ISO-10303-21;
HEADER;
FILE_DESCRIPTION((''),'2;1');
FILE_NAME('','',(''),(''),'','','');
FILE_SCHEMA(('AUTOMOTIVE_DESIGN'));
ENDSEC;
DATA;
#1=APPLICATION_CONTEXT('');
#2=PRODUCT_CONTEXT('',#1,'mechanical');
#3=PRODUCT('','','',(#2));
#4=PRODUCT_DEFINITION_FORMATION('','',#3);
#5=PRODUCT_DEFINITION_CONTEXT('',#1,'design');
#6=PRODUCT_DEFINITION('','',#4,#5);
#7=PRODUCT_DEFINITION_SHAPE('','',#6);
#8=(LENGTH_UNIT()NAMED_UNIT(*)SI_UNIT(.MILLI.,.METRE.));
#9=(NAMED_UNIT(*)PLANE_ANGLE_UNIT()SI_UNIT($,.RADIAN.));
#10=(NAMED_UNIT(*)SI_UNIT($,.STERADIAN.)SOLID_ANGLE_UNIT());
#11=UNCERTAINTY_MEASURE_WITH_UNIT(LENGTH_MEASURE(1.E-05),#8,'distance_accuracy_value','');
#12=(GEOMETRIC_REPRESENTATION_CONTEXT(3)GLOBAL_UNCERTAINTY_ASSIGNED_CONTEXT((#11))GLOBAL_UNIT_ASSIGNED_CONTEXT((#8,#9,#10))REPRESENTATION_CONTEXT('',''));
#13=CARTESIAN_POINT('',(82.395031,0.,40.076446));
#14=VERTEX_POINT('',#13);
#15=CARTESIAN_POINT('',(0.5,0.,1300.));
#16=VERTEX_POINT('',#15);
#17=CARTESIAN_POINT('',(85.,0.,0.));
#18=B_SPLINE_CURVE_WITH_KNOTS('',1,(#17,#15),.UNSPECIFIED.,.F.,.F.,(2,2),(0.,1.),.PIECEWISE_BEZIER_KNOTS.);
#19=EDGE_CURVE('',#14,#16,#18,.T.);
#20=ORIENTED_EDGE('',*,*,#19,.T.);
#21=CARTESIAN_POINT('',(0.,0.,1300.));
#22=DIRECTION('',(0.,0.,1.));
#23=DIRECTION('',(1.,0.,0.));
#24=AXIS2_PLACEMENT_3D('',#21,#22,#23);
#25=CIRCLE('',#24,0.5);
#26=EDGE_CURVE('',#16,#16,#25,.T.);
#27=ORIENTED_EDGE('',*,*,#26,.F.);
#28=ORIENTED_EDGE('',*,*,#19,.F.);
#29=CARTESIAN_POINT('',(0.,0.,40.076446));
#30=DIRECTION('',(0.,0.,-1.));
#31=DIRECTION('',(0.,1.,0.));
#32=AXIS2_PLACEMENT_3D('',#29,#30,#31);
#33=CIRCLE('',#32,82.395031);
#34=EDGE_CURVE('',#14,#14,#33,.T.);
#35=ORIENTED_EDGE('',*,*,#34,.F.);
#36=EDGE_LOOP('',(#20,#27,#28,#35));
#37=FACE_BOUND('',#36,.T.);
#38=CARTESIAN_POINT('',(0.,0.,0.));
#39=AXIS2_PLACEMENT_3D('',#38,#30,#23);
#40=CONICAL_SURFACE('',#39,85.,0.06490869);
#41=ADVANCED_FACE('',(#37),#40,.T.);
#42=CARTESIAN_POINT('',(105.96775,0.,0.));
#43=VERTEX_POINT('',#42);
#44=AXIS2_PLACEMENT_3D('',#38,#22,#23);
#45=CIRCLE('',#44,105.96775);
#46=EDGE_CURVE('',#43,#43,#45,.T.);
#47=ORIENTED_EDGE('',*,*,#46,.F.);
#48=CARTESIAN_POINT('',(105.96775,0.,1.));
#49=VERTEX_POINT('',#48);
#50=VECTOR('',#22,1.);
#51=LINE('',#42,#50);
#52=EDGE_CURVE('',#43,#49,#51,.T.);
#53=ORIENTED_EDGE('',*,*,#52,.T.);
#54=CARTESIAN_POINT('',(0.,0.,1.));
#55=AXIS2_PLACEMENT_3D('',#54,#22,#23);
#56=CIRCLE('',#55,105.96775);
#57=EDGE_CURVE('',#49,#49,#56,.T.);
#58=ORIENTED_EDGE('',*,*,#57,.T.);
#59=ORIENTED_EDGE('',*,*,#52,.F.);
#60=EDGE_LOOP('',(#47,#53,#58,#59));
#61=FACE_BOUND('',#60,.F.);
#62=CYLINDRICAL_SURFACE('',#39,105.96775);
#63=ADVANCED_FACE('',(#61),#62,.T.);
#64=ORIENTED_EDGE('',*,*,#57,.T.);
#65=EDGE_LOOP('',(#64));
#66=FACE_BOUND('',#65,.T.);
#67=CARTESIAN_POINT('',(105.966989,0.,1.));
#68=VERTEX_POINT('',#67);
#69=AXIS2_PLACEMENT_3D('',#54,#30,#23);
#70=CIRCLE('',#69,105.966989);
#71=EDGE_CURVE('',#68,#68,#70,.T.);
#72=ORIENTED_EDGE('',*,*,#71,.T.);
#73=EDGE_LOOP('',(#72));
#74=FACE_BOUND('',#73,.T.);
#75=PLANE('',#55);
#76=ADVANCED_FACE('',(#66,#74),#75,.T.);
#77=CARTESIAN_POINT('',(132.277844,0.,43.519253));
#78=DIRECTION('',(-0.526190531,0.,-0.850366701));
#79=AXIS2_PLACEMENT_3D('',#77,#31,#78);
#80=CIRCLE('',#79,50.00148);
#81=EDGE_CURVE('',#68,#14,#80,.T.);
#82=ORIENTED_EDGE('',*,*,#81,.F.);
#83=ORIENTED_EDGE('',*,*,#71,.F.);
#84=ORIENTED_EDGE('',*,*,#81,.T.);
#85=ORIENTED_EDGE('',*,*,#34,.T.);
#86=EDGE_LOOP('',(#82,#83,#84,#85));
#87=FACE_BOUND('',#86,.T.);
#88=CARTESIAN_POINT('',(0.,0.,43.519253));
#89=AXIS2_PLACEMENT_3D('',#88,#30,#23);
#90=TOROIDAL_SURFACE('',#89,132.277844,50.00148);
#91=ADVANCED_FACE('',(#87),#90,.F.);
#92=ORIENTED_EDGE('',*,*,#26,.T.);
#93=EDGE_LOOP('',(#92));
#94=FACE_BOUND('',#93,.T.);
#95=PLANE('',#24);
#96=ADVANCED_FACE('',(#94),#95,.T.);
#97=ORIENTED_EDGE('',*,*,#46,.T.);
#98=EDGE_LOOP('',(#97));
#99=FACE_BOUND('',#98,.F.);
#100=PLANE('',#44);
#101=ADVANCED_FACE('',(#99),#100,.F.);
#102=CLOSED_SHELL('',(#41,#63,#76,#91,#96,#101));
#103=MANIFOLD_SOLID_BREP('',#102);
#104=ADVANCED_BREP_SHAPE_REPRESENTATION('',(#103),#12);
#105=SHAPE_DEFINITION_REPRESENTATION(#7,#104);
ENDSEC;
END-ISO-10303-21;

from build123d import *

# Parameters (mm, degrees)
F0_R     = 85
F2_R     = 0.5
F4_R     = 105.9677495378
F5_DEPTH = 1


# Not quite as in the source:
# - a fillet or chamfer that OpenCascade refuses, or shapes differently, is made with other operations: its cross-section is extruded or revolved along the edge and cut away or added


with BuildPart() as f3:
    # F0 (on Top) → F3 section 0
    with BuildSketch(Plane.XY):
        Circle(F0_R)
    # F2 (on offset) → F3 section 1
    with BuildSketch(Plane.XY.offset(1300)):
        Circle(F2_R)
    loft()

    # F4 (on Top) → F5 (join)
    with BuildSketch(Plane.XY):
        Circle(F4_R)
    extrude(amount=F5_DEPTH)

    # F6: fillet of radius 50 on 1 edges, made by hand


with BuildPart() as f6_tool2:
    # F6_s3 → F6_t4 (revolve)
    with BuildSketch(Plane.XZ):
        with BuildLine():
            ThreePointArc((105.9675390616, 0.9996598533), (89.4115983215, 17.7775955554), (82.3816590809, 40.2760011541))
            Line((82.3816590809, 40.2760011541), (77.3920405677, 39.9516759507))
            ThreePointArc((77.3920405677, 39.9516759507), (78.6689106061, 20.3136883463), (79.9453814868, 0.6756747966))
            Line((79.9453814868, 0.6756747966), (84.935, -4.0001479723))
            ThreePointArc((84.935, -4.0001479723), (95.4512695308, -4.0001479723), (103.3365085465, -3.2522994801))
            Line((103.3365085465, -3.2522994801), (105.9675390616, 0.9996598533))
        make_face()
    revolve(axis=Axis((0, 0, 1), (0, 0, 1)))

    split(bisect_by=Plane.XY, keep=Keep.TOP)


with BuildPart() as f3_1:
    add(f3.part)

    # F6_t1: union F6_tool2
    add(f6_tool2.part)


solid = f3_1.part
